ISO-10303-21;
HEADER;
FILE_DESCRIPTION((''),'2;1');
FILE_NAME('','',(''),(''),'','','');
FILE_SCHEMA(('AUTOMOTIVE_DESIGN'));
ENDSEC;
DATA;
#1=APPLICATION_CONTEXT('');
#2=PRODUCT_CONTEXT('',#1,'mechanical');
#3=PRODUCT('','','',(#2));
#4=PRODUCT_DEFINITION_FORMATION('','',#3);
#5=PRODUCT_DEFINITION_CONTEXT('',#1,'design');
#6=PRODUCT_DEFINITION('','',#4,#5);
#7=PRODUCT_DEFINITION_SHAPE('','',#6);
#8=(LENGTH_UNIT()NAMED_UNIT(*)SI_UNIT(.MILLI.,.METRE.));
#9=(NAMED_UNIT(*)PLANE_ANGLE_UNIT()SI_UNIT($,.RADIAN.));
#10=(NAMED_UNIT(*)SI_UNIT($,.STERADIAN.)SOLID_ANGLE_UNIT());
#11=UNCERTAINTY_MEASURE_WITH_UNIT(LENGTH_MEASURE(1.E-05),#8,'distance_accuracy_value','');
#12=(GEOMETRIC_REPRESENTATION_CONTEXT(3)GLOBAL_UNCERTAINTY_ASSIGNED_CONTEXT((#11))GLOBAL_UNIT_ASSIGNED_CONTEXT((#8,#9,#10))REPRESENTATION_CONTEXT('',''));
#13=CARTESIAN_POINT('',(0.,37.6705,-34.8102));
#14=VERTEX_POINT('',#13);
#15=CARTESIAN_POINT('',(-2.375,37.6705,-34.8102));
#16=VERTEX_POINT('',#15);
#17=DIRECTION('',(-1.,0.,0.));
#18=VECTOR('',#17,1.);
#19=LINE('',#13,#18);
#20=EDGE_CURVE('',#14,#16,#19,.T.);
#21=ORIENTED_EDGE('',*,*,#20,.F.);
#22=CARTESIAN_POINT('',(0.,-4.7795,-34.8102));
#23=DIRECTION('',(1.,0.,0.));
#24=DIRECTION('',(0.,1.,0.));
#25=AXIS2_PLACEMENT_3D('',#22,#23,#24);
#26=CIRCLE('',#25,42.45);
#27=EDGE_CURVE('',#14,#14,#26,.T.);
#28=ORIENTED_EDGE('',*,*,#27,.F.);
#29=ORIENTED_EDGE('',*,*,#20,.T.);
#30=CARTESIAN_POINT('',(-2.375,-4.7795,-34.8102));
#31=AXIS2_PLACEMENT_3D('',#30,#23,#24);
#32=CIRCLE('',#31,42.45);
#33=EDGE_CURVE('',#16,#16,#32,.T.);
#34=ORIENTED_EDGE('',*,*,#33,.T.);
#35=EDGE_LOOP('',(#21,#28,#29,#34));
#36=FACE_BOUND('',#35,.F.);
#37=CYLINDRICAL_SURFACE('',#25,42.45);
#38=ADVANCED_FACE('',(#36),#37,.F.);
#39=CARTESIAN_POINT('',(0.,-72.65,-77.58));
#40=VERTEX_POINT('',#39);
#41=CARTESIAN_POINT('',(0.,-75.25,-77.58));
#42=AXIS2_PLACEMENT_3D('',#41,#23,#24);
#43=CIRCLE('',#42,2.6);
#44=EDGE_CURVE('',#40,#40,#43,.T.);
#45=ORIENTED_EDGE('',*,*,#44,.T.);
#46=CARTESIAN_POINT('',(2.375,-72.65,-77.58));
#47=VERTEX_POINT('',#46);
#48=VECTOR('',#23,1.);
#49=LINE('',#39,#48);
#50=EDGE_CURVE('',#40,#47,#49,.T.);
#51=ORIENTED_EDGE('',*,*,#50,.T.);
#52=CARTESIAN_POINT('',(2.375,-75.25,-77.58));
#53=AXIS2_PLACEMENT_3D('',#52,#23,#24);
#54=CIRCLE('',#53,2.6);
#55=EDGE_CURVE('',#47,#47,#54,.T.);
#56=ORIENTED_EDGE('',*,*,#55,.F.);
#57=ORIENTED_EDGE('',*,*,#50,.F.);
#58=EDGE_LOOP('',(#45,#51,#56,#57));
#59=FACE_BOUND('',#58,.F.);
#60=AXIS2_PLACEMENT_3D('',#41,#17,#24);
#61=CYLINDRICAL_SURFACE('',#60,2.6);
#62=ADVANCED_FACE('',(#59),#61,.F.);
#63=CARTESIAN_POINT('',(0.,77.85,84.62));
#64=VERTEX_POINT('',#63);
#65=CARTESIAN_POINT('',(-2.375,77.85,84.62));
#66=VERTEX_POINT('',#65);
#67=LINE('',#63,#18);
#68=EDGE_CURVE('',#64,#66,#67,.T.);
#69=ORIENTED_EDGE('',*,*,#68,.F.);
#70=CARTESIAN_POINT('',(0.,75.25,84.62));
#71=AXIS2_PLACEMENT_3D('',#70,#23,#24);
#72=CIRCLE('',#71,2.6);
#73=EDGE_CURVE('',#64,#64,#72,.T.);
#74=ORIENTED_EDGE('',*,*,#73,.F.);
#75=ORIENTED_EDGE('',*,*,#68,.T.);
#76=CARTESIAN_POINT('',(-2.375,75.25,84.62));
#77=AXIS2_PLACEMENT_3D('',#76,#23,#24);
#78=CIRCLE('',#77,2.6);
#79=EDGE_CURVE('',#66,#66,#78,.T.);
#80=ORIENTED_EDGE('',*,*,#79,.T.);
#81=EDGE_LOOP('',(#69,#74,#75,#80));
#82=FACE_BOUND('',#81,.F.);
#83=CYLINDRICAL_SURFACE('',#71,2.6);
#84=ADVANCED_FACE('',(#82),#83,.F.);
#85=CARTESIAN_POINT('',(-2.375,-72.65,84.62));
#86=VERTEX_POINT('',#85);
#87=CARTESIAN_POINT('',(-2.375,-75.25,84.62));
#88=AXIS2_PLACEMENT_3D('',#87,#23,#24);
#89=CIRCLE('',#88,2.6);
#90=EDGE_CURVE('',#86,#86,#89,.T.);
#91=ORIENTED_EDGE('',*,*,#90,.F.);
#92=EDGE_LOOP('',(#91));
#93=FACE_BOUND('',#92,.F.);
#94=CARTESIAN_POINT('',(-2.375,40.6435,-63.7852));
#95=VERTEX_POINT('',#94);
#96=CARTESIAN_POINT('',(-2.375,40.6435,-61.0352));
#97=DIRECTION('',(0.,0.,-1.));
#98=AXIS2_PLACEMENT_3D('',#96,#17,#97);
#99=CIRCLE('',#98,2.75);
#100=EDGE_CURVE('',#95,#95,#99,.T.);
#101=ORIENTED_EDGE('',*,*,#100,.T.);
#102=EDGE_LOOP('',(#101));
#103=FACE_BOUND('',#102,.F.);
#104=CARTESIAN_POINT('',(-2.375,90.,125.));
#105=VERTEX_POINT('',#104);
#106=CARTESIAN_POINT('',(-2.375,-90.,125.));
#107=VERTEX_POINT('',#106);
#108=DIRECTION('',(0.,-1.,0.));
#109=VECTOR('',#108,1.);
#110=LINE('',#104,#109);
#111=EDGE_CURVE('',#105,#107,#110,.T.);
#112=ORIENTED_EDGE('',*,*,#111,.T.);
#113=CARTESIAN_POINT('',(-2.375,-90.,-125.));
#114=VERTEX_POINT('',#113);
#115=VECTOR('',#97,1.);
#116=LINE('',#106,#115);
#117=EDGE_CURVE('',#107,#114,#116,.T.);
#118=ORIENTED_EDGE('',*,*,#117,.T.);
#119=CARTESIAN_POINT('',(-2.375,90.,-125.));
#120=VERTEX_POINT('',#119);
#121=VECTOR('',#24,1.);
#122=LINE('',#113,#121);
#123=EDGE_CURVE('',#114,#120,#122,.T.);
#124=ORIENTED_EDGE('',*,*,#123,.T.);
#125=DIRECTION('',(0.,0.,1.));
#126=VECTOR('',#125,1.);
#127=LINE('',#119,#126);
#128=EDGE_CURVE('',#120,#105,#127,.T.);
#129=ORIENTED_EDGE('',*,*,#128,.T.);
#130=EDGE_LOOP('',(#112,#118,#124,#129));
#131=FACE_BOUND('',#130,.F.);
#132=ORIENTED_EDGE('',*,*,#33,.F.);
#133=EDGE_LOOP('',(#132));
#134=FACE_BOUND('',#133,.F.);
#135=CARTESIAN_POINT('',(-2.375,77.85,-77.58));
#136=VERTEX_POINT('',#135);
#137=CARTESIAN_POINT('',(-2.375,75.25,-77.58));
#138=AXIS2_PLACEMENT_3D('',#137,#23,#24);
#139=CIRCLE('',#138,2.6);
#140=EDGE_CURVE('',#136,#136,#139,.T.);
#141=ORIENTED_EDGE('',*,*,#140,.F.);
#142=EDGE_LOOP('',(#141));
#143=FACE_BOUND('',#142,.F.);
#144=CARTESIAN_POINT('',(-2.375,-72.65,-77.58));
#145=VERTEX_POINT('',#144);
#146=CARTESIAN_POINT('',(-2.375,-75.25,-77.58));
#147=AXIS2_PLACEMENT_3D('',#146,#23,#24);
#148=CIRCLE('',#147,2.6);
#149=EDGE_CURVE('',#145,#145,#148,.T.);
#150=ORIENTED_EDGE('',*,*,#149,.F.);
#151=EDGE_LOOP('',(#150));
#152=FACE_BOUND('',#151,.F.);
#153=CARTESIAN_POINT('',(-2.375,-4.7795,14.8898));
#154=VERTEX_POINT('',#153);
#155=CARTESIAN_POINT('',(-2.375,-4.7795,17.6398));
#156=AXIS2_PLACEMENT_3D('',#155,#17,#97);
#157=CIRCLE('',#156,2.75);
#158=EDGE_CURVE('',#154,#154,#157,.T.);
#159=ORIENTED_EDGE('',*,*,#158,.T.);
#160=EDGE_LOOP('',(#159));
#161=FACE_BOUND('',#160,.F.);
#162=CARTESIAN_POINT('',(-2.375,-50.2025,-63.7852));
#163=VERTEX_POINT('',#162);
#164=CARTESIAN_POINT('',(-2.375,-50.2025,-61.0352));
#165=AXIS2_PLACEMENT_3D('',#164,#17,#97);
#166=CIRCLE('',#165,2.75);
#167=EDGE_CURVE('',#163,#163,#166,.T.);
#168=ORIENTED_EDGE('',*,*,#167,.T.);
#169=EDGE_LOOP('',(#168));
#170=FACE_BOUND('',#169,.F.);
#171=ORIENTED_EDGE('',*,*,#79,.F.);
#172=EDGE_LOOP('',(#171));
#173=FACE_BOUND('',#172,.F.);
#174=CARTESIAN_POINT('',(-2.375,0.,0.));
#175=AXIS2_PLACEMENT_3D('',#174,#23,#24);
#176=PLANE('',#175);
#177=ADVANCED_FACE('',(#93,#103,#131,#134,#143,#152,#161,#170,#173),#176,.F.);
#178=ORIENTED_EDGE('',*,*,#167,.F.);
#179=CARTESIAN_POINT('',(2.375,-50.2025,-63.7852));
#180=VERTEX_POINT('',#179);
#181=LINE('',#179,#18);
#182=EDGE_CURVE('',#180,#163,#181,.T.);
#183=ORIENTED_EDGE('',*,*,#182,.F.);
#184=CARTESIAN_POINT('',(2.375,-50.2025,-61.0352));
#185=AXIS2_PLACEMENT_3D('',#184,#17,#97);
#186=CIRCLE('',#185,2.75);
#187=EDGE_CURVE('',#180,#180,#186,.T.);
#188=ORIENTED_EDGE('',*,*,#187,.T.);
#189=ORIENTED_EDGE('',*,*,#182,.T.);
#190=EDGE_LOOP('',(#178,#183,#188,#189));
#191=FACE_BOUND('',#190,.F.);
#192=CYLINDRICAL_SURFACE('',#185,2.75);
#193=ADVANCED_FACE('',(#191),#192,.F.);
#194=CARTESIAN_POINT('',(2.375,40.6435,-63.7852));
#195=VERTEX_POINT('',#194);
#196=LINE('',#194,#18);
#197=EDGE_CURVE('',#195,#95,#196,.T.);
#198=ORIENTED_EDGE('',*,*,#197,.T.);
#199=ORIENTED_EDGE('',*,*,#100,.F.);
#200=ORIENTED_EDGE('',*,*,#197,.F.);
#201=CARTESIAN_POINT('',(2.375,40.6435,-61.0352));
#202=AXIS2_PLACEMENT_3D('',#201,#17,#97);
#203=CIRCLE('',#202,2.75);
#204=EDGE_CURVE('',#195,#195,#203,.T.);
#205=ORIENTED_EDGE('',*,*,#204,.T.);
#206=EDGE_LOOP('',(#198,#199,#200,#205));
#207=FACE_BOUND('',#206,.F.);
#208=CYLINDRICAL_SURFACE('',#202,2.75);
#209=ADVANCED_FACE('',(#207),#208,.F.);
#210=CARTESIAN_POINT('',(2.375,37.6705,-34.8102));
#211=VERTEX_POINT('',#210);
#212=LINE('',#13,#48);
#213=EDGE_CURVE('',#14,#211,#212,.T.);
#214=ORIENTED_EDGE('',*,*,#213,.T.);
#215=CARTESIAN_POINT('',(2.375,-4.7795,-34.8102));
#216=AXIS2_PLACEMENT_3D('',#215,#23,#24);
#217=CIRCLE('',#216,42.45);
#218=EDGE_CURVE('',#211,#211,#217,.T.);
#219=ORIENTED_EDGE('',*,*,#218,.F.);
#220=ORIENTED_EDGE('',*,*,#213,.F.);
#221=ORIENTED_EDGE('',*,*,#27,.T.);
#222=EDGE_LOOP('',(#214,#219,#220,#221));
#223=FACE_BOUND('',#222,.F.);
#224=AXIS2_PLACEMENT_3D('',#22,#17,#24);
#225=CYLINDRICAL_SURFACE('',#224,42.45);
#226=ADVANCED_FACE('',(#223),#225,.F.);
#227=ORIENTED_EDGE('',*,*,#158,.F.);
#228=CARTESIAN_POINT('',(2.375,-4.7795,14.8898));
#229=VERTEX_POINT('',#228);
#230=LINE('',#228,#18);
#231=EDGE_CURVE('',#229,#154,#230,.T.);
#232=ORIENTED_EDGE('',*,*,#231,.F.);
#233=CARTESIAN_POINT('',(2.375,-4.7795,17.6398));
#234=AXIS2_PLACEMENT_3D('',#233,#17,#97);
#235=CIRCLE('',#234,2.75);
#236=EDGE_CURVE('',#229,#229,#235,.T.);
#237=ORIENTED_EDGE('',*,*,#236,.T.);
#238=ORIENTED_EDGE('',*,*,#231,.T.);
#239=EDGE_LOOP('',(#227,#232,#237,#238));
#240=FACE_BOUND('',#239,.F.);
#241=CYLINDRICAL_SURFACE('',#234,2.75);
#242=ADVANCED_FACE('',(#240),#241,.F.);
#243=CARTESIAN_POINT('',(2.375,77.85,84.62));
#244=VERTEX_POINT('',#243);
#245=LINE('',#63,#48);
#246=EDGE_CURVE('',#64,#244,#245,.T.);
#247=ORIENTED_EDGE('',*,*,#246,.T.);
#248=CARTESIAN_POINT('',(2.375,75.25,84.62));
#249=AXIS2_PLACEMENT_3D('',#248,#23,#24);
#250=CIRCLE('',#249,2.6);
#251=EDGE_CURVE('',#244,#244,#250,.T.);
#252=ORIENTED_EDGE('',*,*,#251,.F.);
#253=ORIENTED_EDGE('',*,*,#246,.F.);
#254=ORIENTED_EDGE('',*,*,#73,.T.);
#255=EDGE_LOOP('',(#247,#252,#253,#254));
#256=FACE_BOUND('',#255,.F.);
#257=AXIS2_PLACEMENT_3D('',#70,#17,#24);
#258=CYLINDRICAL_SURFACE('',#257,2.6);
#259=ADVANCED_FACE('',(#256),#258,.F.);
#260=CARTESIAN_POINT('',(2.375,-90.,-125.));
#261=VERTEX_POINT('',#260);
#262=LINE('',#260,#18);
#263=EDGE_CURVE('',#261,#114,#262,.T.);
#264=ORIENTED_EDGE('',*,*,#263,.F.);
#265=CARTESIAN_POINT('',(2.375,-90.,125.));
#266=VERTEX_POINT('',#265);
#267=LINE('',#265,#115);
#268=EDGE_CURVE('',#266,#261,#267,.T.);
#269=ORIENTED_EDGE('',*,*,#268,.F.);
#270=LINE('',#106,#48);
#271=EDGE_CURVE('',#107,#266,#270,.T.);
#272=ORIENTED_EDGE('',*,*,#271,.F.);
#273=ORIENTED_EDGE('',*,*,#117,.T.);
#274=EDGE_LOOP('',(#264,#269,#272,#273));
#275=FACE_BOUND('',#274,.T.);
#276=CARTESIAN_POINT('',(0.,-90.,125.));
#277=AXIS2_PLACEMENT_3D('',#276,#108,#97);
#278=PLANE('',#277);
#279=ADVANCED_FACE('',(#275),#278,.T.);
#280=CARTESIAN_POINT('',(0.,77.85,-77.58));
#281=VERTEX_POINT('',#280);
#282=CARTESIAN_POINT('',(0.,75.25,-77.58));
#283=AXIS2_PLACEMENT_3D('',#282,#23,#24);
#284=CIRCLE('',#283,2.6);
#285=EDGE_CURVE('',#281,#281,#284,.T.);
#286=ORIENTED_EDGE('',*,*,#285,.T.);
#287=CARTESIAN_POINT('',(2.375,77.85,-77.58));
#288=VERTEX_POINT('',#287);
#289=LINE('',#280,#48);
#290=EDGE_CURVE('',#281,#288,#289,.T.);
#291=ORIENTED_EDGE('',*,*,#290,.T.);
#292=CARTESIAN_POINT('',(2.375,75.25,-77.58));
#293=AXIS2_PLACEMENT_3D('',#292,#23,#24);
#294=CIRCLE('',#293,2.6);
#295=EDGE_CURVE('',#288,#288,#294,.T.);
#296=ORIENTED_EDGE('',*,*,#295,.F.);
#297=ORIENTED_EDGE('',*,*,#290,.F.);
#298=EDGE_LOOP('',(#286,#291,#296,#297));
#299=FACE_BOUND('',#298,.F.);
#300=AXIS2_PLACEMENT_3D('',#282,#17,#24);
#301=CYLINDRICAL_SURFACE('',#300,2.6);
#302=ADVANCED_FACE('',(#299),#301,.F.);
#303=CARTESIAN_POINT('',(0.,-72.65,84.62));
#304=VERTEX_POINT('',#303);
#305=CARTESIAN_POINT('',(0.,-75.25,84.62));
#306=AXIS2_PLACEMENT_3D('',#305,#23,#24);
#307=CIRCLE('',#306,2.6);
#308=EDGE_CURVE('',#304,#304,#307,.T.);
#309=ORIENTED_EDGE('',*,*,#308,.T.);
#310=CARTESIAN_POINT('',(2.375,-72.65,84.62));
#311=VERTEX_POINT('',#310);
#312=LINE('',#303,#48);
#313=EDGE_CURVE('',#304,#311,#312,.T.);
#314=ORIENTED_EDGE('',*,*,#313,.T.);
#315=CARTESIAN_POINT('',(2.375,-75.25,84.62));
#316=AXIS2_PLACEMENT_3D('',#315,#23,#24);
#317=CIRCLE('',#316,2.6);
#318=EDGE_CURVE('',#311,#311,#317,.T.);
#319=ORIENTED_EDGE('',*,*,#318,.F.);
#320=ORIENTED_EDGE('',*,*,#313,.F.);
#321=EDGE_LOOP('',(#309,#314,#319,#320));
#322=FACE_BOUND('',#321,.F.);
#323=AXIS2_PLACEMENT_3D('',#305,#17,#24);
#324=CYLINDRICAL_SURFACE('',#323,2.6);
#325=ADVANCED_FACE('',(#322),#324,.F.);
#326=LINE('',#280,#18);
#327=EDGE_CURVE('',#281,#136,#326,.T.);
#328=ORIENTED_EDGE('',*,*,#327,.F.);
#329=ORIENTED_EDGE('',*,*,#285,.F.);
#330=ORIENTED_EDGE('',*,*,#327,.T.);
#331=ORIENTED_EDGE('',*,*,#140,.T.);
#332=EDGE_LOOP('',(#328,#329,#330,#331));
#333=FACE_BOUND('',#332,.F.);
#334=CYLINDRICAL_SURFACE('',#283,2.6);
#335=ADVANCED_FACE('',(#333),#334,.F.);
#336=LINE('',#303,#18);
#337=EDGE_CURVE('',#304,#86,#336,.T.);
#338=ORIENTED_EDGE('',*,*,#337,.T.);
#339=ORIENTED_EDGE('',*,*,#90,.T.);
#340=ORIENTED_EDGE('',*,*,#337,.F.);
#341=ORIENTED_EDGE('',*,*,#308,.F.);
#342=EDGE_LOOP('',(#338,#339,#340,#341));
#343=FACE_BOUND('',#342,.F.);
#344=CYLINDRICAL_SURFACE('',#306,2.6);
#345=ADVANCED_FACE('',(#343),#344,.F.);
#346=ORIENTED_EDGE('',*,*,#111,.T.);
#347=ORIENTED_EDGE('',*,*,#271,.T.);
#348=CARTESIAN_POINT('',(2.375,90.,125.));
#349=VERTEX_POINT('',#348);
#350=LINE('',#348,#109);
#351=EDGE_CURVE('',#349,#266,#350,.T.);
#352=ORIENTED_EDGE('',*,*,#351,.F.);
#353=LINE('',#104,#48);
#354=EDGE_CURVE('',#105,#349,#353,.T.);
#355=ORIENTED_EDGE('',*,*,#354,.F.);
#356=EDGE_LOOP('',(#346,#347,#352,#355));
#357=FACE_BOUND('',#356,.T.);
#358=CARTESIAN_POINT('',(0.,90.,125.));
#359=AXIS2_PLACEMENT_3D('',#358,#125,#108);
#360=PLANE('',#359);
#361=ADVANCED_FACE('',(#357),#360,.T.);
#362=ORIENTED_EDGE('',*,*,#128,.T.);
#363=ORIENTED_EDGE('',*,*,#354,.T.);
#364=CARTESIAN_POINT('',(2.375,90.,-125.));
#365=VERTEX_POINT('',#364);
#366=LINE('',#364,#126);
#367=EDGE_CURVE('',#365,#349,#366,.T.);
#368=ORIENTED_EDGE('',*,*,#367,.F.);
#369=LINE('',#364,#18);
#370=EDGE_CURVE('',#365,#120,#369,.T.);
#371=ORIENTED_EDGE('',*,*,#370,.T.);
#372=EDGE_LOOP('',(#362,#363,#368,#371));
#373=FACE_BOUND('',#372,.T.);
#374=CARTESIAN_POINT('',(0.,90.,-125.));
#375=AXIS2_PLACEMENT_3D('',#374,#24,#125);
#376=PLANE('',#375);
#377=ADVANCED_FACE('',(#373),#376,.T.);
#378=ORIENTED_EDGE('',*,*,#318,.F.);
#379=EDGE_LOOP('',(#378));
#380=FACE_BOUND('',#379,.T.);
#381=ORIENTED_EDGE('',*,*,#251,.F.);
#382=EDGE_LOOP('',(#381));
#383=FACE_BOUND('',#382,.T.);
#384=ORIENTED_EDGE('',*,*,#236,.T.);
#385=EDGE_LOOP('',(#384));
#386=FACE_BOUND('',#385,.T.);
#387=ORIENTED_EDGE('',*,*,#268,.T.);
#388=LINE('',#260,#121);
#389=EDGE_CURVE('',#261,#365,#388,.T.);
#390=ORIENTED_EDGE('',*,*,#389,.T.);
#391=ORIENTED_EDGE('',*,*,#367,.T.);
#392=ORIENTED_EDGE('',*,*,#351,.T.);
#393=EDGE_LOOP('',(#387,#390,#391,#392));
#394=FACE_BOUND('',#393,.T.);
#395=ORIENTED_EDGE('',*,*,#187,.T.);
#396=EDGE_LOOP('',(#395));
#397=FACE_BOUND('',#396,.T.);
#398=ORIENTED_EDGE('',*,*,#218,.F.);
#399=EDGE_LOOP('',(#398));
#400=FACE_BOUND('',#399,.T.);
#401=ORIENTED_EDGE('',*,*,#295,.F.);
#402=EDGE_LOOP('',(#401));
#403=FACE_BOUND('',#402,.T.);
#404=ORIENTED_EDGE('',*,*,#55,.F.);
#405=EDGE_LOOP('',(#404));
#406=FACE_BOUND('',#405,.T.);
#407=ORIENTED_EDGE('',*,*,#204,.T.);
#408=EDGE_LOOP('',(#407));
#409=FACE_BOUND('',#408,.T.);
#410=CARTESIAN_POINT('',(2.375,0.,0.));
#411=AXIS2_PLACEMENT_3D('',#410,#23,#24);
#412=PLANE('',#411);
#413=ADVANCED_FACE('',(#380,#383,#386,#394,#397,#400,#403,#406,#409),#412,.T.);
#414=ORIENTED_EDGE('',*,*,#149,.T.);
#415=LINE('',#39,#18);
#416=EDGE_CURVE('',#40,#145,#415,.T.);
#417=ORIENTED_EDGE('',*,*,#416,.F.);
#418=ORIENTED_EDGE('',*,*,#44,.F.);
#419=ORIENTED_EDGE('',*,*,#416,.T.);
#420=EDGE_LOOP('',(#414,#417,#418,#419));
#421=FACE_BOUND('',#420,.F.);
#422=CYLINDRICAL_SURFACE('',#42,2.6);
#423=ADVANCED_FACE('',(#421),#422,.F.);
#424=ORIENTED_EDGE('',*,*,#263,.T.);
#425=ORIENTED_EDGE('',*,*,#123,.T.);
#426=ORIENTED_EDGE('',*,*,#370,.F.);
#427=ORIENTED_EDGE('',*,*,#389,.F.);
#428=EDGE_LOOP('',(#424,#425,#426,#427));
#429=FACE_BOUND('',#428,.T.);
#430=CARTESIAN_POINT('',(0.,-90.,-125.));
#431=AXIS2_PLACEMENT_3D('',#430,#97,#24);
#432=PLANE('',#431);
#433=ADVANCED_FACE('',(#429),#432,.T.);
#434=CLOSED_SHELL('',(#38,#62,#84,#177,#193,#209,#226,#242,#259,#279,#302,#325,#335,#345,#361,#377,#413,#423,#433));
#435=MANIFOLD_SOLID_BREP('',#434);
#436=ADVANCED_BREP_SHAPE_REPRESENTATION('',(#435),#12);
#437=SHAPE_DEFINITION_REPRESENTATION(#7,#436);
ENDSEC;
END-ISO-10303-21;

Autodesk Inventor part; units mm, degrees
ref_plane "YZ Plane" through (0, 0, 0) normal (1, 0, 0) x (0, 1, 0)
ref_plane "XZ Plane" through (0, 0, 0) normal (0, 1, 0) x (-1, 0, 0)
ref_plane "XY Plane" through (0, 0, 0) normal (0, 0, 1) x (1, 0, 0)
sketch "Face" plane through (0, 0, 0) normal (0, 0, 1) x (1, 0, 0)
  circle A0 centre (143.9602, -80.6846) radius 6.35
  circle A1 centre (39.7975, -186.0352) radius 2.4
  circle A2 centre (85.2205, -107.3602) radius 2.4
  circle A3 centre (130.6435, -186.0352) radius 2.4
  circle A4 centre (85.2205, -159.8102) radius 42.45
  circle A5 centre (14.75, -202.58) radius 2.6
  circle A6 centre (165.25, -202.58) radius 2.6
  circle A7 centre (14.75, -40.38) radius 2.6
  circle A8 centre (165.25, -40.38) radius 2.6
  line L0 (180, 0) -> (0, 0)
  line L1 (0, 0) -> (0, -250)
  line L2 (0, -250) -> (180, -250)
  line L3 (180, -250) -> (180, 0)
  point P0 (94.9979, -134.0949)
  point P1 (175.25, -245.25)
sketch "Sketch1" plane through (0, 0, 0) normal (1, 0, 0) x (0, 1, 0)
  circle A0 centre (53.9602, 44.3154) radius 6.35
  circle A1 centre (-50.2025, -61.0352) radius 2.4
  circle A2 centre (-4.7795, 17.6398) radius 2.4
  circle A3 centre (40.6435, -61.0352) radius 2.4
  circle A4 centre (-4.7795, -34.8102) radius 42.45
  circle A5 centre (-75.25, -77.58) radius 2.6
  circle A6 centre (75.25, -77.58) radius 2.6
  circle A7 centre (-75.25, 84.62) radius 2.6
  circle A8 centre (75.25, 84.62) radius 2.6
  line L0 (90, 125) -> (-90, 125)
  line L1 (-90, 125) -> (-90, -125)
  line L2 (-90, -125) -> (90, -125)
  line L3 (90, -125) -> (90, 125)
  point P0 (0, 0)
  point P1 (-90, 0)
  point P2 (0, 125)
extrude "Extrusion1" add sketch "Sketch1" along normal mid plane 4.75 contours A0 | L3 L2 L1 L0
sketch "Sketch2" plane through (2.375, 0, 0) normal (1, 0, 0) x (0, 0, -1)
  circle A0 centre (-17.6398, -4.7795) radius 2.4 projected
  circle A1 centre (61.0352, -50.2025) radius 2.4 projected
  circle A2 centre (61.0352, 40.6435) radius 2.4 projected
  point P0 (0, 0)
hole "Hole1" at (2.375, -4.7795, 17.6398) at (2.375, -50.2025, -61.0352) at (2.375, 40.6435, -61.0352) direction (-1, 0, 0) diameter 5.5 end through all clearance for "Socket Head Cap Screw" size "M5" standard "Ansi Metric M Profile"
properties part number "BREEZE-M08"
